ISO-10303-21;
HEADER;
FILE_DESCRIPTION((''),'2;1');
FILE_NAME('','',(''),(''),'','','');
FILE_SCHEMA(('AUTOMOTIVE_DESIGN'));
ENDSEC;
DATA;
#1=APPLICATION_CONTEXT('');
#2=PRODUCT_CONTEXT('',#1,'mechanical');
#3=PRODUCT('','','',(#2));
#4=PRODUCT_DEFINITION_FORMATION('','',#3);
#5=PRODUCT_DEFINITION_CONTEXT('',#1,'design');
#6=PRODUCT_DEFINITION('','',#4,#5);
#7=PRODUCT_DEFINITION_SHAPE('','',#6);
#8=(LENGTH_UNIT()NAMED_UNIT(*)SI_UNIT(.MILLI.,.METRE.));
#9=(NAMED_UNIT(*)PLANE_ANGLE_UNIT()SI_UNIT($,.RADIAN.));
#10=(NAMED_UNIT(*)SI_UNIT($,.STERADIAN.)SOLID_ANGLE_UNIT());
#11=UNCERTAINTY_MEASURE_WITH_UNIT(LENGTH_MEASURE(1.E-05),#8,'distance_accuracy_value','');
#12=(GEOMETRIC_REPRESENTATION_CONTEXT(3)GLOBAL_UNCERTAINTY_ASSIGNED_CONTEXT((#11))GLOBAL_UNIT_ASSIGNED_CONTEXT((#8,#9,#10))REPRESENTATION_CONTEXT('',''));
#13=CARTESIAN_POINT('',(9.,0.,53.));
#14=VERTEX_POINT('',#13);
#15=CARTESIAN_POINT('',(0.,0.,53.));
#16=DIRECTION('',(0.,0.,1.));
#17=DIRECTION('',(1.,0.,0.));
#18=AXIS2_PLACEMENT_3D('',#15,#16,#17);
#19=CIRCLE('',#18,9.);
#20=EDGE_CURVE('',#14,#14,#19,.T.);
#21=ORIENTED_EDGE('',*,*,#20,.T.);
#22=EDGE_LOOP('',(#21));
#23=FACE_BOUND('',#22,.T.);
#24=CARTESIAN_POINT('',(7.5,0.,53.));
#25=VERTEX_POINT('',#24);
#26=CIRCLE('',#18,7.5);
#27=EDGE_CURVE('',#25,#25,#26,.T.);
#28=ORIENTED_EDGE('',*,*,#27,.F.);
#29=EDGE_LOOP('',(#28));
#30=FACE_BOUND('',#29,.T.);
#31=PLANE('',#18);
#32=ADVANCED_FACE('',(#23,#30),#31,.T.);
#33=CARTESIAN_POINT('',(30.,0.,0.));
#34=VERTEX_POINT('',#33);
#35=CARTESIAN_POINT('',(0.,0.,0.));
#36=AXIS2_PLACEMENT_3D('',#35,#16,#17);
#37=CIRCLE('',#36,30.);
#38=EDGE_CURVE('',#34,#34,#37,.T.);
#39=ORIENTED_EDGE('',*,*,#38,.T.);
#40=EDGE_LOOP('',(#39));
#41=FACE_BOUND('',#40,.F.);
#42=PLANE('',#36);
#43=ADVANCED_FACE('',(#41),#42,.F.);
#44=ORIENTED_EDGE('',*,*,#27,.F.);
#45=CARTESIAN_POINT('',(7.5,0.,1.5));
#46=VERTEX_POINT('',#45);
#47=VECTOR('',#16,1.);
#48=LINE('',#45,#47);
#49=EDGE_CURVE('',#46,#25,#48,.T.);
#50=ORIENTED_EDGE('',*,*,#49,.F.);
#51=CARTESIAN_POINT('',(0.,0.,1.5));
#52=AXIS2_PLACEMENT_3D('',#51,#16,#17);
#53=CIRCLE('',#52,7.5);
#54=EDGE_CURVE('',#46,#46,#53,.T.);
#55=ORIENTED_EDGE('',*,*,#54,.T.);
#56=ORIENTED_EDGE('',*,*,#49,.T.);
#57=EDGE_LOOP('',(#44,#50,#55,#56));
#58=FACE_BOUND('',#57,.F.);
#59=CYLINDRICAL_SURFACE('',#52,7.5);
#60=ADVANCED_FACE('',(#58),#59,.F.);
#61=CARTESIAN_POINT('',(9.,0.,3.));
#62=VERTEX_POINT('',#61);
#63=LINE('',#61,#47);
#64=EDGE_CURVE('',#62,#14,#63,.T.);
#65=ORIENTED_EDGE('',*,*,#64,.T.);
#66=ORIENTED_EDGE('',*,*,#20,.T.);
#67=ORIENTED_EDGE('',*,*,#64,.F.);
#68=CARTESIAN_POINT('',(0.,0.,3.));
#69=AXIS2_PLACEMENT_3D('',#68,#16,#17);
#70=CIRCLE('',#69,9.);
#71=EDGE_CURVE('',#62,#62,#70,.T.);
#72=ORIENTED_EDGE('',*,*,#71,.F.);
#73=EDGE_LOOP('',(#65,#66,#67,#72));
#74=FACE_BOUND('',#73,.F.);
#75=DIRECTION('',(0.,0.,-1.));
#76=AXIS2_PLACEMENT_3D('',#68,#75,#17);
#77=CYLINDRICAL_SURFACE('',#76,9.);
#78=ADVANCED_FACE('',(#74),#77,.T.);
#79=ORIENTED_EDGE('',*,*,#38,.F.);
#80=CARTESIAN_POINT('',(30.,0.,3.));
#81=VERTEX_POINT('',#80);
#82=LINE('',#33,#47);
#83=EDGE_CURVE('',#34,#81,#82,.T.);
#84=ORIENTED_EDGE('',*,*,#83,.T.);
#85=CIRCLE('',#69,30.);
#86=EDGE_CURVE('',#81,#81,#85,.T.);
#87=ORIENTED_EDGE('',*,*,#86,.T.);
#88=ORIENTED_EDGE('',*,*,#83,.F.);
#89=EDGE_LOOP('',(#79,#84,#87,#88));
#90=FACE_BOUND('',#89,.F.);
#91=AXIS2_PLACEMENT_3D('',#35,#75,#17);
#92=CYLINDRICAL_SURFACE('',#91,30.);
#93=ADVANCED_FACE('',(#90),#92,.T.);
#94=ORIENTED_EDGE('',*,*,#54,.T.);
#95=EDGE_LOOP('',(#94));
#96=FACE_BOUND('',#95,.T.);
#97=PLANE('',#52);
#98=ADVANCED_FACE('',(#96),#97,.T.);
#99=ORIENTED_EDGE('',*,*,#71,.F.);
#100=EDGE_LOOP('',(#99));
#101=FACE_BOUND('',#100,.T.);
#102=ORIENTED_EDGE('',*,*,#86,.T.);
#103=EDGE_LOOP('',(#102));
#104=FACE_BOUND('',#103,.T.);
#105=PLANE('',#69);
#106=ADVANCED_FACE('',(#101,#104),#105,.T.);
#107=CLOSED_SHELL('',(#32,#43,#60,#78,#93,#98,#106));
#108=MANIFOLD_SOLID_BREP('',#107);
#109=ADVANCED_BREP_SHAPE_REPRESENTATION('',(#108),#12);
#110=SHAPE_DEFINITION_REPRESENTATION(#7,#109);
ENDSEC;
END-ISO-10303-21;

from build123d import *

# Parameters (mm, degrees)
F0_R     = 30
F1_DEPTH = 3
F2_R     = 9
F3_DEPTH = 50
F4_T     = 1.5


# Not quite as in the source:
# - a shell that OpenCascade refuses in one call is made with other operations: the cavity is built on its own and cut out


with BuildPart() as f1:
    # F0 (on Top) → F1 (new body)
    with BuildSketch(Plane.XY):
        Circle(F0_R)
    extrude(amount=F1_DEPTH)

    # F2 (on face) → F3 (join)
    with BuildSketch(Plane.XY.offset(3)):
        Circle(F2_R)
    extrude(amount=F3_DEPTH)

    # F4: shell of thickness 1.5, made by hand


with BuildPart() as f4_core1:
    # F4_t2: copy of F1
    add(f1.part)

    # the walls: a layer under each face that stays
    f4_faces = [f4_core1.faces().sort_by_distance(p)[0] for p in [
        (-30, 0, 1.5),
        (0, 0, 0),
        (-20, -20, 3),
        (-9, 0, 28),
    ]]
    thicken(f4_faces, amount=-F4_T, mode=Mode.SUBTRACT)

    # F4_s3 → F4_t4 (revolve, cut)
    with BuildSketch(Plane.XZ):
        Polygon((9.015, 3.015), (9, 1.5), (7.5, 1.5), (7.5, 3), align=None)
    revolve(axis=Axis((0, 0, 3), (0, 0, 1)), mode=Mode.SUBTRACT)


with BuildPart() as f1_1:
    add(f1.part)

    # what is left inside the walls is the cavity
    f4_cavity = [f4_core1.part.solids().sort_by_distance(p)[0] for p in [
        (-7.485, 0, 18.666667),
    ]]
    add(f4_cavity, mode=Mode.SUBTRACT)


solid = f1_1.part
